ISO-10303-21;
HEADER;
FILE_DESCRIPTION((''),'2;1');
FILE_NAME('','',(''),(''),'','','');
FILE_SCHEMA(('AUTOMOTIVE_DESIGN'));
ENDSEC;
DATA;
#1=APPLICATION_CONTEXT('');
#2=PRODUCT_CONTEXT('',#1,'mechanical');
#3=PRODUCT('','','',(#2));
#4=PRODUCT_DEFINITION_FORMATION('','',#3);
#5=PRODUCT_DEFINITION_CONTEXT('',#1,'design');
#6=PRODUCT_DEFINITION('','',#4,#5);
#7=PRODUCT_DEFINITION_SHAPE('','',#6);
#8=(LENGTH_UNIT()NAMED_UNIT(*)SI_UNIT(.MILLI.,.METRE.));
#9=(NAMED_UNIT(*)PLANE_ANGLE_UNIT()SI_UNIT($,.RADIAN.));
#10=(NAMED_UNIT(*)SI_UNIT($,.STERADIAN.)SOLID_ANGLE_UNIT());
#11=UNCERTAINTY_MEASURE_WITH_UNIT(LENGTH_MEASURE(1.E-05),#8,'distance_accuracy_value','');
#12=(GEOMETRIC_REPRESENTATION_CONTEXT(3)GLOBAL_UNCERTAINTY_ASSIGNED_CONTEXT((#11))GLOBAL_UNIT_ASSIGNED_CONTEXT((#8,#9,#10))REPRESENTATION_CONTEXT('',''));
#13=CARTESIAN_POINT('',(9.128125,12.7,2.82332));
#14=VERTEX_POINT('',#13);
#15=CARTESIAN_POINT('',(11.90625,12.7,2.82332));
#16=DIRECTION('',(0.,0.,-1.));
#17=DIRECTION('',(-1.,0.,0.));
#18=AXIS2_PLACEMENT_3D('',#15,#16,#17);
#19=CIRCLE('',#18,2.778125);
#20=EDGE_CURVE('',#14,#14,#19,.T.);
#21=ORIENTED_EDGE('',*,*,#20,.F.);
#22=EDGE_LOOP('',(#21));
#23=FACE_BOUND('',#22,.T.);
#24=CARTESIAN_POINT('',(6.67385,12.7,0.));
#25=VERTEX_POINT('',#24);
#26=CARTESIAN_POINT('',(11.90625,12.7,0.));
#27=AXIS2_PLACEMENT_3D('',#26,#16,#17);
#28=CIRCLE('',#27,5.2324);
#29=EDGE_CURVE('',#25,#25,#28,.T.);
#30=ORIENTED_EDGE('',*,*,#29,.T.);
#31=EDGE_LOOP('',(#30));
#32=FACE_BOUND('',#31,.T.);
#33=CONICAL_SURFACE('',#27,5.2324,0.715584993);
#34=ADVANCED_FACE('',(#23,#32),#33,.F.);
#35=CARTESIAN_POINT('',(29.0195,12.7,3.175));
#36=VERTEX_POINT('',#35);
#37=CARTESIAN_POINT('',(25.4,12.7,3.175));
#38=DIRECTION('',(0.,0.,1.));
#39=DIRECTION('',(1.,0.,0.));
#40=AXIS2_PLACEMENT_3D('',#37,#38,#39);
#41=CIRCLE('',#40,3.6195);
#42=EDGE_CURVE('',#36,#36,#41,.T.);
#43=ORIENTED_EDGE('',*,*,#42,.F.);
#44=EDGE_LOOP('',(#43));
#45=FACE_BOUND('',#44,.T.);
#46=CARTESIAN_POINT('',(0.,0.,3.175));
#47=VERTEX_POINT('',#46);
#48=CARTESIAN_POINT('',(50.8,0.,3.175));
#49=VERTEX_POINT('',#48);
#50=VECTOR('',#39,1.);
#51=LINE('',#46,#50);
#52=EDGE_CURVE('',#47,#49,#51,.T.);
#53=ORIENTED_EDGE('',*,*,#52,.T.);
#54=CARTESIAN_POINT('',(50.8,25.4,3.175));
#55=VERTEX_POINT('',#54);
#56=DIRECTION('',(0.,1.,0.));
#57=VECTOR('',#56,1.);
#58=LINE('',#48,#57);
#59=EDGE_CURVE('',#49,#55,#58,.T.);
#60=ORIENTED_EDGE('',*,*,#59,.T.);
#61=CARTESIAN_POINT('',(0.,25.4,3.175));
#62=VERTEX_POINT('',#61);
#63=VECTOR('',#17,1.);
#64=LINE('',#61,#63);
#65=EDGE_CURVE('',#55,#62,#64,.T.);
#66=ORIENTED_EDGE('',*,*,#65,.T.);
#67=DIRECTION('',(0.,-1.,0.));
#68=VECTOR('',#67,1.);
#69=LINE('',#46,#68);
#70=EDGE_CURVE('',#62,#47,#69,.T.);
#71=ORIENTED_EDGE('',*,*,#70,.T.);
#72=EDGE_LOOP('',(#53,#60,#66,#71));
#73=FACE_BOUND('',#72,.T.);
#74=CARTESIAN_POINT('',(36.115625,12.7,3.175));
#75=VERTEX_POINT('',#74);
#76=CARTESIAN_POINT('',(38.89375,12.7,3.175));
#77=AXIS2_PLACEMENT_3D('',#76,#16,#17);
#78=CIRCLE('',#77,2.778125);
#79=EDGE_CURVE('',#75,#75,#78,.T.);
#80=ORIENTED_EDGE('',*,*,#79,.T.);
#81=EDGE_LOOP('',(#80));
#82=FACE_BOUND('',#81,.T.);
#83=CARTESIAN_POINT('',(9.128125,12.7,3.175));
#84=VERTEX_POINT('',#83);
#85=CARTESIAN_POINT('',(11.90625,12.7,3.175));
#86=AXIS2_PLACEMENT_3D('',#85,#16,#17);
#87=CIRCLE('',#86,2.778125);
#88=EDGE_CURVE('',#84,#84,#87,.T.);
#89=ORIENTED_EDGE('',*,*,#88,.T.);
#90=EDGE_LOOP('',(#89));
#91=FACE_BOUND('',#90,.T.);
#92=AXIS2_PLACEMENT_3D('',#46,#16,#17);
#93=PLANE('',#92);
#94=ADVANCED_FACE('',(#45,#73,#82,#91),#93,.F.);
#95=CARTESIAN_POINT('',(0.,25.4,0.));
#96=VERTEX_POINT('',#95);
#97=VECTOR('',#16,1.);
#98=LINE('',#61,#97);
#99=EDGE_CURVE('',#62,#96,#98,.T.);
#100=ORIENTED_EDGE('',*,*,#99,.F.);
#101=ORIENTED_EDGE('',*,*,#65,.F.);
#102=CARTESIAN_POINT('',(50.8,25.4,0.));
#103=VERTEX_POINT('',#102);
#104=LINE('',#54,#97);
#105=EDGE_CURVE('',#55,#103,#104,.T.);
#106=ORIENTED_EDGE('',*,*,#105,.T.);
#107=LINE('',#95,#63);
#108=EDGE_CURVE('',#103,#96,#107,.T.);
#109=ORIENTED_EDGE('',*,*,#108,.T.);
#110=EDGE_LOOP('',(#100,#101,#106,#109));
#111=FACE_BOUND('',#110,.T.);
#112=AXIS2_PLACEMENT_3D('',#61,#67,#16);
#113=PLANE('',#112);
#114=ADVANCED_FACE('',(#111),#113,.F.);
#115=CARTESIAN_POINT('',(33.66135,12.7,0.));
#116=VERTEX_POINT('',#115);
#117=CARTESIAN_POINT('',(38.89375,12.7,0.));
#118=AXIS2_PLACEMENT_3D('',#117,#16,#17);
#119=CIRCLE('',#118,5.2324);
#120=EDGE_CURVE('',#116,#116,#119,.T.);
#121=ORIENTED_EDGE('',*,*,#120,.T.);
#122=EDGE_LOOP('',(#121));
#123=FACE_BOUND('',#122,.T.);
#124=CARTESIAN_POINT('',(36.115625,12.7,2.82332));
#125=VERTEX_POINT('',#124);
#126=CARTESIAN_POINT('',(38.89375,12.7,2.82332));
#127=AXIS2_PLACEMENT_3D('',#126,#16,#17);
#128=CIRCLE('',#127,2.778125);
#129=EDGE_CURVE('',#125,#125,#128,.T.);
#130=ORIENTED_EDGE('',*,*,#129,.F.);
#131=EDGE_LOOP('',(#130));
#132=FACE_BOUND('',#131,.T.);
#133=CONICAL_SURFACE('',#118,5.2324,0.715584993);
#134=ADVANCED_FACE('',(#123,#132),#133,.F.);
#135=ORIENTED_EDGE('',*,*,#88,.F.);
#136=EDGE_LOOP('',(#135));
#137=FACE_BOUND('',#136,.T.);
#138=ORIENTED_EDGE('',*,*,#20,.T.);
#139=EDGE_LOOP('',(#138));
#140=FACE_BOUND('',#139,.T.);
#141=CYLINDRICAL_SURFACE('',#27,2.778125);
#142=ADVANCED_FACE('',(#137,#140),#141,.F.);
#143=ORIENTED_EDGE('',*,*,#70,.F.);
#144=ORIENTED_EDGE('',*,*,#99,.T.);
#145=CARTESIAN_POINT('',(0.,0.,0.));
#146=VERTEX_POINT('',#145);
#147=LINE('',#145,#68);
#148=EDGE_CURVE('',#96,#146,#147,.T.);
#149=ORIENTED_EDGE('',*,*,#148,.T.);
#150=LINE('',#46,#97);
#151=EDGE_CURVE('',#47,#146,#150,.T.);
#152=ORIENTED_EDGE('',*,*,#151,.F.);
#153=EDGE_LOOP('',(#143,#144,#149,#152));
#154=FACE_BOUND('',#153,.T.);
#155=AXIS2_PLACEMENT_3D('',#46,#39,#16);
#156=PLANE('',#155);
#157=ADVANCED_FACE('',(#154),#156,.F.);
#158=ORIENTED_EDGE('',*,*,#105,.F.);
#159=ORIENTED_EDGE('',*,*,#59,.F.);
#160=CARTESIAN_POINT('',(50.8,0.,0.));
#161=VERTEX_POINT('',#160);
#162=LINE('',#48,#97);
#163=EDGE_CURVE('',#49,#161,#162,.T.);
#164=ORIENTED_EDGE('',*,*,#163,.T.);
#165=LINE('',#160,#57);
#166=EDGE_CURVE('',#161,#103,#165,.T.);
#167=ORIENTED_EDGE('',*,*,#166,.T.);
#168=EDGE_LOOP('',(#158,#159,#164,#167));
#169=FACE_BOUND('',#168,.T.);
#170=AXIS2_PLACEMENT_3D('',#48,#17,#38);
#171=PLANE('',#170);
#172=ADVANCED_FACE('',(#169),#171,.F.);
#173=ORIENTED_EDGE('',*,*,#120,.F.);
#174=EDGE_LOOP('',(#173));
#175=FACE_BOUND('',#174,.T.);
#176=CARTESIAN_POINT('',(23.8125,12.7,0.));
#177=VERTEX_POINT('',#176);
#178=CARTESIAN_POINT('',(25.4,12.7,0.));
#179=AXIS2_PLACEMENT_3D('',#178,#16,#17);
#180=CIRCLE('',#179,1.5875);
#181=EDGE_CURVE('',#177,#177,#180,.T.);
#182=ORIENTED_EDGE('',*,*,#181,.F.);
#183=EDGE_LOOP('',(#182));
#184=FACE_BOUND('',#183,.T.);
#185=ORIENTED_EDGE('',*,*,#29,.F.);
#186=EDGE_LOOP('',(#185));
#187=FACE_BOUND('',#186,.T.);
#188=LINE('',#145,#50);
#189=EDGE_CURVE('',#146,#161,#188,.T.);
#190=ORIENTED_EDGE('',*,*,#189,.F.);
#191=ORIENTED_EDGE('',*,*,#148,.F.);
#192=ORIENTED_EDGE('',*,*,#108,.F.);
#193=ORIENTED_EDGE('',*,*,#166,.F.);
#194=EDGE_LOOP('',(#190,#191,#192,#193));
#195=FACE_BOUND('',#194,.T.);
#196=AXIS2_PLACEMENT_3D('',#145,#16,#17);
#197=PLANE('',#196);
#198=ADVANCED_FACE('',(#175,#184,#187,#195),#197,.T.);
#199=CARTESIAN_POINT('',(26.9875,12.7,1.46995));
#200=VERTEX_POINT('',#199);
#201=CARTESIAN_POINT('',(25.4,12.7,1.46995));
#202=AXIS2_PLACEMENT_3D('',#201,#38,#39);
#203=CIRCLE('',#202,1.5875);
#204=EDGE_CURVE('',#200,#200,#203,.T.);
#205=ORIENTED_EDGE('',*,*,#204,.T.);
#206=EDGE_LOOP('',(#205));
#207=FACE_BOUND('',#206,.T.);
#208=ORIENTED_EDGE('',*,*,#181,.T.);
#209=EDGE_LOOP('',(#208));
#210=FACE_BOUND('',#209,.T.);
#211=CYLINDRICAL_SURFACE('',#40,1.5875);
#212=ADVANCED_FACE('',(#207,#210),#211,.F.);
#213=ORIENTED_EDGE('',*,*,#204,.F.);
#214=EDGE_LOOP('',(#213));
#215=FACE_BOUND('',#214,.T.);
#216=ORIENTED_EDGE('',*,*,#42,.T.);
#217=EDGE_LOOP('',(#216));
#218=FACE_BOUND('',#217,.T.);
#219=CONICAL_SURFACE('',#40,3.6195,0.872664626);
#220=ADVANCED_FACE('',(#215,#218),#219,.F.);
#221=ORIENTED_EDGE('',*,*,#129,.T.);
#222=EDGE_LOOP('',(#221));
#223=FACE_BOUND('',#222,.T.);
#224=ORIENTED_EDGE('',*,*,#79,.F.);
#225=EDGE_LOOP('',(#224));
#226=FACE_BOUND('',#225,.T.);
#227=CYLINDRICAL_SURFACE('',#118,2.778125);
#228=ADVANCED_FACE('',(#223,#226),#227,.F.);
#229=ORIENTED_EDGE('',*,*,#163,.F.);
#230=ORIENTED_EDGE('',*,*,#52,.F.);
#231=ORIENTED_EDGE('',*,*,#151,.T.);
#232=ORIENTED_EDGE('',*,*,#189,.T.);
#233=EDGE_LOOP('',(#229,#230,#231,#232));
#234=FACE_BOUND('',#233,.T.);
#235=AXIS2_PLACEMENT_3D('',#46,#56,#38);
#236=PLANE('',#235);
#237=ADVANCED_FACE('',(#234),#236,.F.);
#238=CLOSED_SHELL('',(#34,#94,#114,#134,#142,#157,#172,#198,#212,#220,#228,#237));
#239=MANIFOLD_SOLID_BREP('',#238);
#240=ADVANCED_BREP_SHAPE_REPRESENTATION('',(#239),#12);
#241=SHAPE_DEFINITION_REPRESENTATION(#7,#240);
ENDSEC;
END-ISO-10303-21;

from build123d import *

# Parameters (mm, degrees)
SKETCH1_W                                         = 50.8
SKETCH1_H                                         = 25.4
BOSS_EXTRUDE1_DEPTH                               = 3.175
CSK_FOR_6_FLAT_HEAD_MACHINE_SCREW_100_D           = 3.175
CSK_FOR_6_FLAT_HEAD_MACHINE_SCREW_100_DEPTH       = 25.4
CSK_FOR_6_FLAT_HEAD_MACHINE_SCREW_100_CSINK_D     = 7.239
CSK_FOR_6_FLAT_HEAD_MACHINE_SCREW_100_CSINK_ANGLE = 100
CSK_FOR_6_FLAT_HEAD_MACHINE_SCREW_100_TIP         = 0.953866233


# Read off the part's stored shape, not the designer's step: CSK for #6 Flat Head Machine Screw (100)2
with BuildPart() as part:
    # Sketch1 → Boss-Extrude1 (new body)
    with BuildSketch(Plane.XY):
        with Locations((25.4, 12.7)):
            Rectangle(SKETCH1_W, SKETCH1_H)
    extrude(amount=BOSS_EXTRUDE1_DEPTH)

    # CSK for _6 Flat Head Machine Screw _100
    with Locations(Plane.XY.offset(3.175)):
        with Locations((25.4, 12.7)):
            CounterSinkHole(CSK_FOR_6_FLAT_HEAD_MACHINE_SCREW_100_D / 2, CSK_FOR_6_FLAT_HEAD_MACHINE_SCREW_100_CSINK_D / 2, depth=CSK_FOR_6_FLAT_HEAD_MACHINE_SCREW_100_DEPTH, counter_sink_angle=CSK_FOR_6_FLAT_HEAD_MACHINE_SCREW_100_CSINK_ANGLE)
            with Locations((0, 0, -(CSK_FOR_6_FLAT_HEAD_MACHINE_SCREW_100_DEPTH + CSK_FOR_6_FLAT_HEAD_MACHINE_SCREW_100_TIP / 2))):  # 118° drill point
                Cone(0, CSK_FOR_6_FLAT_HEAD_MACHINE_SCREW_100_D / 2, CSK_FOR_6_FLAT_HEAD_MACHINE_SCREW_100_TIP, mode=Mode.SUBTRACT)

    # CSK for _6 Flat Head Machine Screw _ 2 o → CSK for _6 Flat Head Machine Screw _ 2 (revolve, cut)
    with BuildSketch(Plane(origin=(11.90625, 12.7, 0), x_dir=(1, 0, 0), z_dir=(0, -1, 0))):
        Polygon((2.778125, 2.823320423), (2.778125, 3.175), (0, 3.175), (0, 0), (5.2324, 0), align=None)
    revolve(axis=Axis((11.90625, 12.7, 0), (0, 0, 1)), mode=Mode.SUBTRACT)

    # CSK for _6 Flat Head Machine Screw _ 3 → CSK for _6 Flat Head Machine Screw _ 2 2 (revolve, cut)
    with BuildSketch(Plane(origin=(38.89375, 12.7, 0), x_dir=(1, 0, 0), z_dir=(0, -1, 0))):
        Polygon((2.778125, 2.823320423), (2.778125, 3.175), (0, 3.175), (0, 0), (5.2324, 0), align=None)
    revolve(axis=Axis((38.89375, 12.7, 0), (0, 0, 1)), mode=Mode.SUBTRACT)


solid = part.part
